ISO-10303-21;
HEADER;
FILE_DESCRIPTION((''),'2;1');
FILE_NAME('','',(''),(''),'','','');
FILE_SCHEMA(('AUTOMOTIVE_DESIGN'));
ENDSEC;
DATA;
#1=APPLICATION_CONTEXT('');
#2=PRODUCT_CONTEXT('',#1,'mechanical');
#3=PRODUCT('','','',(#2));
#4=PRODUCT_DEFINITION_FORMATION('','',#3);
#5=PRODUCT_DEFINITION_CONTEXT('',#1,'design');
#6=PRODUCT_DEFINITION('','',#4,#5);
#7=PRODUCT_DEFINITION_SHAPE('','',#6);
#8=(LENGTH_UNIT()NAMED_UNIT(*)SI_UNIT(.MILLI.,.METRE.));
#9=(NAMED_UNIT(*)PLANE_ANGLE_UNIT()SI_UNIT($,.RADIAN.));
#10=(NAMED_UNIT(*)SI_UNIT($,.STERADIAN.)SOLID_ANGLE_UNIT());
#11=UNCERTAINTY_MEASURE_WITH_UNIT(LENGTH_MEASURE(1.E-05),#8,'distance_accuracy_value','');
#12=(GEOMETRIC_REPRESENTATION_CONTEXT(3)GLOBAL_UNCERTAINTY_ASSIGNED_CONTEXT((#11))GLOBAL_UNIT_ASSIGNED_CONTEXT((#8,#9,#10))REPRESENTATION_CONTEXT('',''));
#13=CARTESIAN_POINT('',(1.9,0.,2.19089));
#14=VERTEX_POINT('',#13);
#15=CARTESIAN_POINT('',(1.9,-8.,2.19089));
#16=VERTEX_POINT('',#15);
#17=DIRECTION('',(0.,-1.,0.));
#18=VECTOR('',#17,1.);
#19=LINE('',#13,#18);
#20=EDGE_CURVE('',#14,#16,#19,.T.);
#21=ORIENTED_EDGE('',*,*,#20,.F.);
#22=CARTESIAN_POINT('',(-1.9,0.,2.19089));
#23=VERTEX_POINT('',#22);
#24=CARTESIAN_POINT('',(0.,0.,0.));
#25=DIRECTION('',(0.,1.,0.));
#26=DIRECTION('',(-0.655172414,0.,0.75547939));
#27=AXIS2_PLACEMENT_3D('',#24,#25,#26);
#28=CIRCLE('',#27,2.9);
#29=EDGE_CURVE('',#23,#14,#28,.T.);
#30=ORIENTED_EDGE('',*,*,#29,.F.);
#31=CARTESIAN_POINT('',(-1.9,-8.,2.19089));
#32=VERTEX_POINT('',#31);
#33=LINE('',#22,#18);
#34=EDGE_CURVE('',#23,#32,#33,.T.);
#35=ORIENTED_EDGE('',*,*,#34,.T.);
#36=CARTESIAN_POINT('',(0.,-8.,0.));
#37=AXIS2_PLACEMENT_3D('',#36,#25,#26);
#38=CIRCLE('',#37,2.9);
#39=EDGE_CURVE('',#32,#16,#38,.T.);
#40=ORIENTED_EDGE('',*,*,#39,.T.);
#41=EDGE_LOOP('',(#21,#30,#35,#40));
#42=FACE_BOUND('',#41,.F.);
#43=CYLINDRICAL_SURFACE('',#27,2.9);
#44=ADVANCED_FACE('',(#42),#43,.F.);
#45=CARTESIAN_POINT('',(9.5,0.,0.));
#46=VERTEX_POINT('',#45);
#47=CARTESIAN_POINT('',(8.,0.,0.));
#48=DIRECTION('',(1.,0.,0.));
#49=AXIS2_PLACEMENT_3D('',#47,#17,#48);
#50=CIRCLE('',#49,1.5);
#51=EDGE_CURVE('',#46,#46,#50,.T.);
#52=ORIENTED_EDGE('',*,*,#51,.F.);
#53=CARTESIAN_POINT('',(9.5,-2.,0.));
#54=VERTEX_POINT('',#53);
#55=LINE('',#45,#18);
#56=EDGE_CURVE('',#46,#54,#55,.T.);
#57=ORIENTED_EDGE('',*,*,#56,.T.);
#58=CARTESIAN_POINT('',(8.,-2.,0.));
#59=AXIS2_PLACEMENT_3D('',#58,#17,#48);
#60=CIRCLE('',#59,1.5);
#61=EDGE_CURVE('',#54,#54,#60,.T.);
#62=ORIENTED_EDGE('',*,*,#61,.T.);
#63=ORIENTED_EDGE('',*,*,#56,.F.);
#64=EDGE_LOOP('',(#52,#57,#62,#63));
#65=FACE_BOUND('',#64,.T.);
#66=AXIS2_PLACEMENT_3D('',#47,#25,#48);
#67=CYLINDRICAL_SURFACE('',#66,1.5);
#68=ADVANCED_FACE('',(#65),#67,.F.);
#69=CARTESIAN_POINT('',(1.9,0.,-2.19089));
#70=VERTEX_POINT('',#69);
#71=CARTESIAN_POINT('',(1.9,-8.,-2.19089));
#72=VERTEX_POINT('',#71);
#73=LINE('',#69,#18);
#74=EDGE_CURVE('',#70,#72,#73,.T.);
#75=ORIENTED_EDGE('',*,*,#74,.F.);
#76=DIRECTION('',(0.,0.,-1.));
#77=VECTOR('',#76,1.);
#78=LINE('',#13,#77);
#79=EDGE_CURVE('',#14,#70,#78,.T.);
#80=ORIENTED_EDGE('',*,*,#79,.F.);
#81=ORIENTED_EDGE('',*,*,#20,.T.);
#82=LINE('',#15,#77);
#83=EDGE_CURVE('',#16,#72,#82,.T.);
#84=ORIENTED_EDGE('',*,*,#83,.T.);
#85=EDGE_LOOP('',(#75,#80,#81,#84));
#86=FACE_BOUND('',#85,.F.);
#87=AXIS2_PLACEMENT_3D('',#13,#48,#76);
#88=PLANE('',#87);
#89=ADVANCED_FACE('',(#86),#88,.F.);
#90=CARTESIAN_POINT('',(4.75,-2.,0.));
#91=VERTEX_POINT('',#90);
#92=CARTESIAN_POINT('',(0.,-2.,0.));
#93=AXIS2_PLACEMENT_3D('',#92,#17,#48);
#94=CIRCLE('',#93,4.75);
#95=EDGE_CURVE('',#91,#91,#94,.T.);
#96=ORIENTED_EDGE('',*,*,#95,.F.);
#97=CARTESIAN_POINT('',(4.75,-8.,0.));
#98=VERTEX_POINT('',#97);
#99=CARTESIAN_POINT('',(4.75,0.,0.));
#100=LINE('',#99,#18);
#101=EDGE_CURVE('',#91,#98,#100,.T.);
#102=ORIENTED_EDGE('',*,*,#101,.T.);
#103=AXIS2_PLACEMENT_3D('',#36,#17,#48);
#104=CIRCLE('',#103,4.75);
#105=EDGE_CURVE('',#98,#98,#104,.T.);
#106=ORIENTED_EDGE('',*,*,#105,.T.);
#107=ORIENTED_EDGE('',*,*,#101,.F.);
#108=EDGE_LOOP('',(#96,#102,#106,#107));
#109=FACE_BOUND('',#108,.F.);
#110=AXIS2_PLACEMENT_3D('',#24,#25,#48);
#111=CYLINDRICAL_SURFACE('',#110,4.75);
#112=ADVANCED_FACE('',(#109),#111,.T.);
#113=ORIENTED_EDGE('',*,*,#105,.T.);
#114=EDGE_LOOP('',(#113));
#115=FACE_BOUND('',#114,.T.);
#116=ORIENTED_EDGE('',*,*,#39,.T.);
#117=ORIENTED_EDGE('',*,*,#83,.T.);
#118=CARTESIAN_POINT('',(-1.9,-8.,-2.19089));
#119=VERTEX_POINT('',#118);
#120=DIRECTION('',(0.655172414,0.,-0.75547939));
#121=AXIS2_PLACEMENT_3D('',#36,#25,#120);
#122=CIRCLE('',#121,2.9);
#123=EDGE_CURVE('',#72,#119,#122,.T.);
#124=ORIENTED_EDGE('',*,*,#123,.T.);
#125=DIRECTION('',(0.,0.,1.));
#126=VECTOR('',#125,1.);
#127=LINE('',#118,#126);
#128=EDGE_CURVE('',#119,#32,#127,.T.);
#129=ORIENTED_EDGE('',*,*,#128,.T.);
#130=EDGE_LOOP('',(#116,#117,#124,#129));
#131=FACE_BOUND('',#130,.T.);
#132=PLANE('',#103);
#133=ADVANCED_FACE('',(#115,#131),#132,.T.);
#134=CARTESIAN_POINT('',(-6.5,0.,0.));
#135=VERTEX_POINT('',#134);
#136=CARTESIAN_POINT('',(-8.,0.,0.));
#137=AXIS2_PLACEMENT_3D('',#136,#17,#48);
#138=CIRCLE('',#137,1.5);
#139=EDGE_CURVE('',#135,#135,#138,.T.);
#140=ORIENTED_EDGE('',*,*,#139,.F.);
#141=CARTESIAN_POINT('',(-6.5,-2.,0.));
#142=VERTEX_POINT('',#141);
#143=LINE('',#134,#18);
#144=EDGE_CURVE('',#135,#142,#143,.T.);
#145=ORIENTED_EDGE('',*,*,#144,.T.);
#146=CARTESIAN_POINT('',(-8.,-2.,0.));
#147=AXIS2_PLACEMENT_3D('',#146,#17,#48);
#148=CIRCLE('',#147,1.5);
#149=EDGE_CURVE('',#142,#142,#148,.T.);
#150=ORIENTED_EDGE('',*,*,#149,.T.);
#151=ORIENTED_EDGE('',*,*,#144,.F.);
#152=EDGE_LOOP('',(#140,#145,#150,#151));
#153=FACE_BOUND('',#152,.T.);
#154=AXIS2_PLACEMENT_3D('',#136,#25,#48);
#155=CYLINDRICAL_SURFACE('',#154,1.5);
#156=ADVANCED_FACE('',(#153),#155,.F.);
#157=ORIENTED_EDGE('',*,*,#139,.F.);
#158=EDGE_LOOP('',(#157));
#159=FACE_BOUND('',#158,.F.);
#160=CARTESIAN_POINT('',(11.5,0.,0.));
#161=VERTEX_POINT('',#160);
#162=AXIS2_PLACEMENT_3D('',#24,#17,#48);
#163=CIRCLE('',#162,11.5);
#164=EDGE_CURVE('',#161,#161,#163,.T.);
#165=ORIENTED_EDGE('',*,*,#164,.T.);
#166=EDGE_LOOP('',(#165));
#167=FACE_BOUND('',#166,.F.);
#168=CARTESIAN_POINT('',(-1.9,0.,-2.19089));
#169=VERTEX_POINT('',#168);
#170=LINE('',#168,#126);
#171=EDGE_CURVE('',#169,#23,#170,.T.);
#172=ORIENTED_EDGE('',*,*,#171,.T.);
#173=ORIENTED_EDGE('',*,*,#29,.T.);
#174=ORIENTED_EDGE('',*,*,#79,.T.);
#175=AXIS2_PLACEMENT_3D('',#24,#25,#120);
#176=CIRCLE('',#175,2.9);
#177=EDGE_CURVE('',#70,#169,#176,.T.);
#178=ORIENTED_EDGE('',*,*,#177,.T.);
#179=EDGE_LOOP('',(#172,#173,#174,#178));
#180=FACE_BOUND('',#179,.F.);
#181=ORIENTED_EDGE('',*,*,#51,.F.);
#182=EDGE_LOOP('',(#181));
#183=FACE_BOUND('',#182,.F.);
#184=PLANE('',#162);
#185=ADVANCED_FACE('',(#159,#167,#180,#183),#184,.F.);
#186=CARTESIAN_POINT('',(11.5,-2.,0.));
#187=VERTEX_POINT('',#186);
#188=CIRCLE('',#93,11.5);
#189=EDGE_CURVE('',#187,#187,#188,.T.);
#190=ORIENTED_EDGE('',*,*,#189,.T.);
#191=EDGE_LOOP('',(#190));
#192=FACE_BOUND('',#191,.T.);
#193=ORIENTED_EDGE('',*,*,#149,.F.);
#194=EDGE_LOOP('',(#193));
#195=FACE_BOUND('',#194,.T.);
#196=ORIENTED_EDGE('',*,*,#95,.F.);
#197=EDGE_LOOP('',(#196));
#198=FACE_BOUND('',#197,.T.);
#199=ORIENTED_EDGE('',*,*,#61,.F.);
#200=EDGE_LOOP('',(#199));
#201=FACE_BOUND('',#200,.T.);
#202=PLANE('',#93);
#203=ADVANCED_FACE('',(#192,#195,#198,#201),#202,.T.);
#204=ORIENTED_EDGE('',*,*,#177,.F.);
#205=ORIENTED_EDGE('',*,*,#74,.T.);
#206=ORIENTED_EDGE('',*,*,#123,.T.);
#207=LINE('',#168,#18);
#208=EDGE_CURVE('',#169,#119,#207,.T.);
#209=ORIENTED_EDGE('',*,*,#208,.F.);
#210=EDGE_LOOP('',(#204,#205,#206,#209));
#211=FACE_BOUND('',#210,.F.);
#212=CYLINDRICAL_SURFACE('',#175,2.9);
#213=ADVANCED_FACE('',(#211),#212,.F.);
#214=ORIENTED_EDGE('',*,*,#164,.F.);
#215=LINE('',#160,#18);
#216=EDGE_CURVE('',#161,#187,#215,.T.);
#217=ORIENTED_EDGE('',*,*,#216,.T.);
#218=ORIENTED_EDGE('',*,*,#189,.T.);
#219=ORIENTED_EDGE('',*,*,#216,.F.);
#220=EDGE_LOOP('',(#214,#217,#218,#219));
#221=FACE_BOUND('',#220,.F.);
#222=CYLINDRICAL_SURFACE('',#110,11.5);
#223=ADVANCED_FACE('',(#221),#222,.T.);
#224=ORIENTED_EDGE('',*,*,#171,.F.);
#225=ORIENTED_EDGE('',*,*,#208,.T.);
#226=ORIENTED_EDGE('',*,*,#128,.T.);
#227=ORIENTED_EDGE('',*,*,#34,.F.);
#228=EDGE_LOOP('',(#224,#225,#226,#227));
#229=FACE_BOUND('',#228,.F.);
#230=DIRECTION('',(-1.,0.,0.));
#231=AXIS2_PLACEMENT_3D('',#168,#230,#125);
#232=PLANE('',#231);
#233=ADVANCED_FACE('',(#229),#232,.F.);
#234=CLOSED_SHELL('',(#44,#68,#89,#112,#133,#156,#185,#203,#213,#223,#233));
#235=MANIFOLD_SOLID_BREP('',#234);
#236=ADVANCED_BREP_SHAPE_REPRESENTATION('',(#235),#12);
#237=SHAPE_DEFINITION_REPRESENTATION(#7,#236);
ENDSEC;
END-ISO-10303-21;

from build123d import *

# Parameters (mm, degrees)
F0_R     = 4.75
F1_DEPTH = 8
F0_R_2   = 11.5
F0_R_3   = 1.5
F2_DEPTH = 2


# Not quite as in the source:
# - a feature names something its author has since deleted; it is built from what else it names


with BuildPart() as f1:
    # F0 (on Front) → F1 (new body)
    with BuildSketch(Plane.XZ):
        Circle(F0_R)
        with BuildLine():
            ThreePointArc((1.9, 2.19089023), (2.6381811917, 1.2041594579), (2.9, 0))
            ThreePointArc((2.9, 0), (2.6381811917, -1.2041594579), (1.9, -2.19089023))
            ThreePointArc((1.9, -2.19089023), (0, -2.9), (-1.9, -2.19089023))
            ThreePointArc((-1.9, -2.19089023), (-2.9, 0), (-1.9, 2.19089023))
            ThreePointArc((-1.9, 2.19089023), (0, 2.9), (1.9, 2.19089023))
        make_face(mode=Mode.SUBTRACT)
        with BuildLine():
            Line((-1.9, -2.19089023), (-1.9, 2.19089023))
            ThreePointArc((-1.9, 2.19089023), (-2.9, 0), (-1.9, -2.19089023))
        make_face()
        with BuildLine():
            ThreePointArc((1.9, -2.19089023), (2.6381811917, -1.2041594579), (2.9, 0))
            ThreePointArc((2.9, 0), (2.6381811917, 1.2041594579), (1.9, 2.19089023))
            Line((1.9, 2.19089023), (1.9, -2.19089023))
        make_face()
    extrude(amount=F1_DEPTH)

    # F0 (on Front) → F2 (join)
    with BuildSketch(Plane.XZ):
        Circle(F0_R_2)
        with Locations((-8, 0)):
            Circle(F0_R_3, mode=Mode.SUBTRACT)
        Circle(F0_R, mode=Mode.SUBTRACT)
        with Locations((8, 0)):
            Circle(F0_R_3, mode=Mode.SUBTRACT)
    extrude(amount=F2_DEPTH)


solid = f1.part
